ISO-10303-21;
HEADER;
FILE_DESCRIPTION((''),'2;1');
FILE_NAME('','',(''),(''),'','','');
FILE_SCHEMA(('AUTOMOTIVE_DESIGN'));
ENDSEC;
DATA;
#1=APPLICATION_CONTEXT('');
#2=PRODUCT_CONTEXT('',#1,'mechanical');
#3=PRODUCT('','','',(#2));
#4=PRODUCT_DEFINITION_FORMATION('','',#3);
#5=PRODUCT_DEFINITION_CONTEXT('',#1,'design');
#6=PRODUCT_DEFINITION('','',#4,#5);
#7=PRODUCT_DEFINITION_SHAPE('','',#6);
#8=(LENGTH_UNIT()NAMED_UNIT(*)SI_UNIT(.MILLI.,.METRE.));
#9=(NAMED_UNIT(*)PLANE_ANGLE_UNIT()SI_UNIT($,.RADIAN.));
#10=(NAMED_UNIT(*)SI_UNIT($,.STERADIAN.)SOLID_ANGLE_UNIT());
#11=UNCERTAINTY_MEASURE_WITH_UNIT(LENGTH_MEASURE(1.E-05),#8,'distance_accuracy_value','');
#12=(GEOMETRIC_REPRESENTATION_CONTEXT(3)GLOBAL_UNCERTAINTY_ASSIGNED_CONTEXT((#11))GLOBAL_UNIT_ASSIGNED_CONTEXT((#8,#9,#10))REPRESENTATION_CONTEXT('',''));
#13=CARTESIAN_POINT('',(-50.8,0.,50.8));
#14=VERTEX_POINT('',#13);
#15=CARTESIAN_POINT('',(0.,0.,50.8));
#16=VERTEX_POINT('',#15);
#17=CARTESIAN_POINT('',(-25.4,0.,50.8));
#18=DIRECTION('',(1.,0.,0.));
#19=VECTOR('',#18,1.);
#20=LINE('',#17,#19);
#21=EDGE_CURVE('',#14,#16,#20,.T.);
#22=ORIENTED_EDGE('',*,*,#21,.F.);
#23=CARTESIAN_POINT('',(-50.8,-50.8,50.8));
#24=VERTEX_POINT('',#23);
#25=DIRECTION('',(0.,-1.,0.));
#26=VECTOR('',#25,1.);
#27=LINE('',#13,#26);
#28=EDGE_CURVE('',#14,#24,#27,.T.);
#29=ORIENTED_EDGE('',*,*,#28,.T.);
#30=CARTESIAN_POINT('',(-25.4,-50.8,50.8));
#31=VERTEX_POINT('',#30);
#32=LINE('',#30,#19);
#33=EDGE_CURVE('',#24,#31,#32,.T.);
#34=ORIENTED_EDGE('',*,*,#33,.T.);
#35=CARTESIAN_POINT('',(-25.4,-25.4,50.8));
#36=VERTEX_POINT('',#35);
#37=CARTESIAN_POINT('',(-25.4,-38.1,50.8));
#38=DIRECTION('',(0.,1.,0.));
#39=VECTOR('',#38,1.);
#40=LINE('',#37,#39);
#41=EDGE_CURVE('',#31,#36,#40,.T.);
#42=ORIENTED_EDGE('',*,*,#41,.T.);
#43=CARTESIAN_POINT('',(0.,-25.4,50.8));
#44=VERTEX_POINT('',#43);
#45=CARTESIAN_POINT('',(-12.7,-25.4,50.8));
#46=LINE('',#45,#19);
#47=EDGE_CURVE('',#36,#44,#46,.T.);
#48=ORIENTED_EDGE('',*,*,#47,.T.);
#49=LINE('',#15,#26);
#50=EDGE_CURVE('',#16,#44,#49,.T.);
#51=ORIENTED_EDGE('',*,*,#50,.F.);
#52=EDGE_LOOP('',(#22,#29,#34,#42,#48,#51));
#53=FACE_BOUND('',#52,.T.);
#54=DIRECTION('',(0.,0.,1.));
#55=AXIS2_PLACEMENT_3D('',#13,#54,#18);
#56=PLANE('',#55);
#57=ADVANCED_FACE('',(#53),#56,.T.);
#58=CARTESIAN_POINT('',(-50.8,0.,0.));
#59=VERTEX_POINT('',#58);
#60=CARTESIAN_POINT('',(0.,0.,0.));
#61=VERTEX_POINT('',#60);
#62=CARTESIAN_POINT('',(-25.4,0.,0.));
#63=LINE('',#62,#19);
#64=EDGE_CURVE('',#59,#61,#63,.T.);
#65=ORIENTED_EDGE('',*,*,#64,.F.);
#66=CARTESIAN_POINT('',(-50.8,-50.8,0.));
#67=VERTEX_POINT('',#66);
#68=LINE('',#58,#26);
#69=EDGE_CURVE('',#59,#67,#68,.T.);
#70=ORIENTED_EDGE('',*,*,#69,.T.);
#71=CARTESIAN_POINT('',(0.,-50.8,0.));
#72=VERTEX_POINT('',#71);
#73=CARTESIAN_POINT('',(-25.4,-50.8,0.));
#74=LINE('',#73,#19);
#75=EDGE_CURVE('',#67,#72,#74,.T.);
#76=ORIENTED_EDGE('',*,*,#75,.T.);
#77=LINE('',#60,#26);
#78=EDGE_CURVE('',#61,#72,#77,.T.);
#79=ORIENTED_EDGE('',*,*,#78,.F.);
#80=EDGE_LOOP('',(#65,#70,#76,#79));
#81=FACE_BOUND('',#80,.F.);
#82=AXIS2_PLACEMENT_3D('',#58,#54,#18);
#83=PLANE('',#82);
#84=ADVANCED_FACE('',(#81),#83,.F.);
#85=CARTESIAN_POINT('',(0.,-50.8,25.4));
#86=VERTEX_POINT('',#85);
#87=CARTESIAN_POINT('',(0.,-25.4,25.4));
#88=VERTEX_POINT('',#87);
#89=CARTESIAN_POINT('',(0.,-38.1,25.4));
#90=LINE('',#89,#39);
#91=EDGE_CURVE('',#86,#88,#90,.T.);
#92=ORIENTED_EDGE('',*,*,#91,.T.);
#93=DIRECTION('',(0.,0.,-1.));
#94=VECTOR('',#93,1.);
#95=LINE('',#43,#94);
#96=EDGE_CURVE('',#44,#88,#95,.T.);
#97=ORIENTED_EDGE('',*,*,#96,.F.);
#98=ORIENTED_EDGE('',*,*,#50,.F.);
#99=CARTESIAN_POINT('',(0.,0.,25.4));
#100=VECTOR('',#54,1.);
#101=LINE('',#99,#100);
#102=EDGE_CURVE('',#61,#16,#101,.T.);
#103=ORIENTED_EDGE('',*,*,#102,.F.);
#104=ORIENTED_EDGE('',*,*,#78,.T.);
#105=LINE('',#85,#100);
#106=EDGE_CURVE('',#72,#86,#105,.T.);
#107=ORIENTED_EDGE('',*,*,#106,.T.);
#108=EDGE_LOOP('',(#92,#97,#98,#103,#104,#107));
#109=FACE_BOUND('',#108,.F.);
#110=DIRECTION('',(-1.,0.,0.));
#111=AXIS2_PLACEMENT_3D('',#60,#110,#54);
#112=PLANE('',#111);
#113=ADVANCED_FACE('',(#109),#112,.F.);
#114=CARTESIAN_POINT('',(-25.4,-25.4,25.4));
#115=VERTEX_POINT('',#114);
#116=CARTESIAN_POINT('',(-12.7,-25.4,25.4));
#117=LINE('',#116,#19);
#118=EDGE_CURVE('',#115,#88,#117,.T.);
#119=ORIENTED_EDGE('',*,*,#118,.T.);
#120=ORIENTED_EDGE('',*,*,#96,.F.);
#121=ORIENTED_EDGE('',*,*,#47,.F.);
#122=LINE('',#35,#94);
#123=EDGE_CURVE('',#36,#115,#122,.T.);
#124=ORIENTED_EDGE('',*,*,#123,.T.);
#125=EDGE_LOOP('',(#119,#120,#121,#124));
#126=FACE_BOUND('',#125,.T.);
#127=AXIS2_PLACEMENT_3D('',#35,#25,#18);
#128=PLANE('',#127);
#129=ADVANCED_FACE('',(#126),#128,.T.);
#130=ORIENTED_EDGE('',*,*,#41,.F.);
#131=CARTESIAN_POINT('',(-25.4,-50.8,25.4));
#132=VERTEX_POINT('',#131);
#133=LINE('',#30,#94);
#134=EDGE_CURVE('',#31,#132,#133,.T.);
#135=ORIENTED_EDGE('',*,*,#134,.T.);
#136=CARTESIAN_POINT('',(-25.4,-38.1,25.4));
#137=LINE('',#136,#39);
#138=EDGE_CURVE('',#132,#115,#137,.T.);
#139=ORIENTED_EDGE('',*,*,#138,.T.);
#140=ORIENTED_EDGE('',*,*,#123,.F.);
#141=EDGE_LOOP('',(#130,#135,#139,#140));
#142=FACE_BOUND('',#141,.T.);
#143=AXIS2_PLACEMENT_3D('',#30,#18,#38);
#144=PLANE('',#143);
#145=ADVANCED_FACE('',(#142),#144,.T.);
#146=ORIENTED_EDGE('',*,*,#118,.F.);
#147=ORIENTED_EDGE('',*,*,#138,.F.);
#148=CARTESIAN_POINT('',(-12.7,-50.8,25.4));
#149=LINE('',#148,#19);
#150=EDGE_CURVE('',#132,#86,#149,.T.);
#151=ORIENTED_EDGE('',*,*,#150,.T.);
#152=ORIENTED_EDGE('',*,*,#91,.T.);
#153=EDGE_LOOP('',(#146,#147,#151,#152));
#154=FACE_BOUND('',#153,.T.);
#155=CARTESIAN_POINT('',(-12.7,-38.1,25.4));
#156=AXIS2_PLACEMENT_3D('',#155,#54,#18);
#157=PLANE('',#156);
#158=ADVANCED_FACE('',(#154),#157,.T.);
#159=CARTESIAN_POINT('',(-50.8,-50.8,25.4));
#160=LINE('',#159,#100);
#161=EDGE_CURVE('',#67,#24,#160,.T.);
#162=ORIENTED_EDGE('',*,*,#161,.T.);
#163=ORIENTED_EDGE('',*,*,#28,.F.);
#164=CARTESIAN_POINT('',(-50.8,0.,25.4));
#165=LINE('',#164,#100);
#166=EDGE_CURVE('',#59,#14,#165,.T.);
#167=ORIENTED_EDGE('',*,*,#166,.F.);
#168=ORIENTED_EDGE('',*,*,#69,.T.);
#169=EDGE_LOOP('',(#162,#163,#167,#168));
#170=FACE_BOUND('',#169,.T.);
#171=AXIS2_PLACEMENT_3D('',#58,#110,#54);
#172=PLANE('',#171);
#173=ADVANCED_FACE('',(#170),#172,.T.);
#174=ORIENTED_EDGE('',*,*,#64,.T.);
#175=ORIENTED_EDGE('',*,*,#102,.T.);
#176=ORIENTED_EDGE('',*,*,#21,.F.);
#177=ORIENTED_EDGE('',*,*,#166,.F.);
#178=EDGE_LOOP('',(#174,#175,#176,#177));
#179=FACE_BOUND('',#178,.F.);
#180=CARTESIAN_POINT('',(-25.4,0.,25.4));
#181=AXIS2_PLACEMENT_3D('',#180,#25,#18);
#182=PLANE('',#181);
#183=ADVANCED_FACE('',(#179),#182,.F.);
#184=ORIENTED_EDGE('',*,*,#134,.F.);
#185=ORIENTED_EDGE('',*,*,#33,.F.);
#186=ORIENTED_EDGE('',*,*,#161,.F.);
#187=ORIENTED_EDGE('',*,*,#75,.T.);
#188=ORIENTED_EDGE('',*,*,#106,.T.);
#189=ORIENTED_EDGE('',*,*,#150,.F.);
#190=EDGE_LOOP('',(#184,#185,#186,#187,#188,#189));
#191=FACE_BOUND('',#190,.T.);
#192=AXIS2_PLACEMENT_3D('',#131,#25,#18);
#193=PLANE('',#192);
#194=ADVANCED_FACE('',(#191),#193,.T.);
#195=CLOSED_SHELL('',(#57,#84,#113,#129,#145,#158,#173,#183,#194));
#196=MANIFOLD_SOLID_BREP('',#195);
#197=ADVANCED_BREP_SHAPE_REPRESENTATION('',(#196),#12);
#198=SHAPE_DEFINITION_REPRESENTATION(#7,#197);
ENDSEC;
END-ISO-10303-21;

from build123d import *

# Parameters (mm, degrees)
F0_W     = 50.8
F0_H     = 50.8
F1_DEPTH = 50.8
F2_W     = 25.4
F2_H     = 25.4
F3_DEPTH = 25.4


# Not quite as in the source:
# - a feature names something its author has since deleted; it is built from what else it names


with BuildPart() as f1:
    # F0 (on Front) → F1 (new body)
    with BuildSketch(Plane.XZ):
        with Locations((-25.4, 25.4)):
            Rectangle(F0_W, F0_H)
    extrude(amount=F1_DEPTH)

    # F2 (on face) → F3 (cut)
    with BuildSketch(Plane.XY.offset(50.8)):
        with Locations((-12.7, -38.1)):
            Rectangle(F2_W, F2_H)
    extrude(amount=-F3_DEPTH, mode=Mode.SUBTRACT)


solid = f1.part
